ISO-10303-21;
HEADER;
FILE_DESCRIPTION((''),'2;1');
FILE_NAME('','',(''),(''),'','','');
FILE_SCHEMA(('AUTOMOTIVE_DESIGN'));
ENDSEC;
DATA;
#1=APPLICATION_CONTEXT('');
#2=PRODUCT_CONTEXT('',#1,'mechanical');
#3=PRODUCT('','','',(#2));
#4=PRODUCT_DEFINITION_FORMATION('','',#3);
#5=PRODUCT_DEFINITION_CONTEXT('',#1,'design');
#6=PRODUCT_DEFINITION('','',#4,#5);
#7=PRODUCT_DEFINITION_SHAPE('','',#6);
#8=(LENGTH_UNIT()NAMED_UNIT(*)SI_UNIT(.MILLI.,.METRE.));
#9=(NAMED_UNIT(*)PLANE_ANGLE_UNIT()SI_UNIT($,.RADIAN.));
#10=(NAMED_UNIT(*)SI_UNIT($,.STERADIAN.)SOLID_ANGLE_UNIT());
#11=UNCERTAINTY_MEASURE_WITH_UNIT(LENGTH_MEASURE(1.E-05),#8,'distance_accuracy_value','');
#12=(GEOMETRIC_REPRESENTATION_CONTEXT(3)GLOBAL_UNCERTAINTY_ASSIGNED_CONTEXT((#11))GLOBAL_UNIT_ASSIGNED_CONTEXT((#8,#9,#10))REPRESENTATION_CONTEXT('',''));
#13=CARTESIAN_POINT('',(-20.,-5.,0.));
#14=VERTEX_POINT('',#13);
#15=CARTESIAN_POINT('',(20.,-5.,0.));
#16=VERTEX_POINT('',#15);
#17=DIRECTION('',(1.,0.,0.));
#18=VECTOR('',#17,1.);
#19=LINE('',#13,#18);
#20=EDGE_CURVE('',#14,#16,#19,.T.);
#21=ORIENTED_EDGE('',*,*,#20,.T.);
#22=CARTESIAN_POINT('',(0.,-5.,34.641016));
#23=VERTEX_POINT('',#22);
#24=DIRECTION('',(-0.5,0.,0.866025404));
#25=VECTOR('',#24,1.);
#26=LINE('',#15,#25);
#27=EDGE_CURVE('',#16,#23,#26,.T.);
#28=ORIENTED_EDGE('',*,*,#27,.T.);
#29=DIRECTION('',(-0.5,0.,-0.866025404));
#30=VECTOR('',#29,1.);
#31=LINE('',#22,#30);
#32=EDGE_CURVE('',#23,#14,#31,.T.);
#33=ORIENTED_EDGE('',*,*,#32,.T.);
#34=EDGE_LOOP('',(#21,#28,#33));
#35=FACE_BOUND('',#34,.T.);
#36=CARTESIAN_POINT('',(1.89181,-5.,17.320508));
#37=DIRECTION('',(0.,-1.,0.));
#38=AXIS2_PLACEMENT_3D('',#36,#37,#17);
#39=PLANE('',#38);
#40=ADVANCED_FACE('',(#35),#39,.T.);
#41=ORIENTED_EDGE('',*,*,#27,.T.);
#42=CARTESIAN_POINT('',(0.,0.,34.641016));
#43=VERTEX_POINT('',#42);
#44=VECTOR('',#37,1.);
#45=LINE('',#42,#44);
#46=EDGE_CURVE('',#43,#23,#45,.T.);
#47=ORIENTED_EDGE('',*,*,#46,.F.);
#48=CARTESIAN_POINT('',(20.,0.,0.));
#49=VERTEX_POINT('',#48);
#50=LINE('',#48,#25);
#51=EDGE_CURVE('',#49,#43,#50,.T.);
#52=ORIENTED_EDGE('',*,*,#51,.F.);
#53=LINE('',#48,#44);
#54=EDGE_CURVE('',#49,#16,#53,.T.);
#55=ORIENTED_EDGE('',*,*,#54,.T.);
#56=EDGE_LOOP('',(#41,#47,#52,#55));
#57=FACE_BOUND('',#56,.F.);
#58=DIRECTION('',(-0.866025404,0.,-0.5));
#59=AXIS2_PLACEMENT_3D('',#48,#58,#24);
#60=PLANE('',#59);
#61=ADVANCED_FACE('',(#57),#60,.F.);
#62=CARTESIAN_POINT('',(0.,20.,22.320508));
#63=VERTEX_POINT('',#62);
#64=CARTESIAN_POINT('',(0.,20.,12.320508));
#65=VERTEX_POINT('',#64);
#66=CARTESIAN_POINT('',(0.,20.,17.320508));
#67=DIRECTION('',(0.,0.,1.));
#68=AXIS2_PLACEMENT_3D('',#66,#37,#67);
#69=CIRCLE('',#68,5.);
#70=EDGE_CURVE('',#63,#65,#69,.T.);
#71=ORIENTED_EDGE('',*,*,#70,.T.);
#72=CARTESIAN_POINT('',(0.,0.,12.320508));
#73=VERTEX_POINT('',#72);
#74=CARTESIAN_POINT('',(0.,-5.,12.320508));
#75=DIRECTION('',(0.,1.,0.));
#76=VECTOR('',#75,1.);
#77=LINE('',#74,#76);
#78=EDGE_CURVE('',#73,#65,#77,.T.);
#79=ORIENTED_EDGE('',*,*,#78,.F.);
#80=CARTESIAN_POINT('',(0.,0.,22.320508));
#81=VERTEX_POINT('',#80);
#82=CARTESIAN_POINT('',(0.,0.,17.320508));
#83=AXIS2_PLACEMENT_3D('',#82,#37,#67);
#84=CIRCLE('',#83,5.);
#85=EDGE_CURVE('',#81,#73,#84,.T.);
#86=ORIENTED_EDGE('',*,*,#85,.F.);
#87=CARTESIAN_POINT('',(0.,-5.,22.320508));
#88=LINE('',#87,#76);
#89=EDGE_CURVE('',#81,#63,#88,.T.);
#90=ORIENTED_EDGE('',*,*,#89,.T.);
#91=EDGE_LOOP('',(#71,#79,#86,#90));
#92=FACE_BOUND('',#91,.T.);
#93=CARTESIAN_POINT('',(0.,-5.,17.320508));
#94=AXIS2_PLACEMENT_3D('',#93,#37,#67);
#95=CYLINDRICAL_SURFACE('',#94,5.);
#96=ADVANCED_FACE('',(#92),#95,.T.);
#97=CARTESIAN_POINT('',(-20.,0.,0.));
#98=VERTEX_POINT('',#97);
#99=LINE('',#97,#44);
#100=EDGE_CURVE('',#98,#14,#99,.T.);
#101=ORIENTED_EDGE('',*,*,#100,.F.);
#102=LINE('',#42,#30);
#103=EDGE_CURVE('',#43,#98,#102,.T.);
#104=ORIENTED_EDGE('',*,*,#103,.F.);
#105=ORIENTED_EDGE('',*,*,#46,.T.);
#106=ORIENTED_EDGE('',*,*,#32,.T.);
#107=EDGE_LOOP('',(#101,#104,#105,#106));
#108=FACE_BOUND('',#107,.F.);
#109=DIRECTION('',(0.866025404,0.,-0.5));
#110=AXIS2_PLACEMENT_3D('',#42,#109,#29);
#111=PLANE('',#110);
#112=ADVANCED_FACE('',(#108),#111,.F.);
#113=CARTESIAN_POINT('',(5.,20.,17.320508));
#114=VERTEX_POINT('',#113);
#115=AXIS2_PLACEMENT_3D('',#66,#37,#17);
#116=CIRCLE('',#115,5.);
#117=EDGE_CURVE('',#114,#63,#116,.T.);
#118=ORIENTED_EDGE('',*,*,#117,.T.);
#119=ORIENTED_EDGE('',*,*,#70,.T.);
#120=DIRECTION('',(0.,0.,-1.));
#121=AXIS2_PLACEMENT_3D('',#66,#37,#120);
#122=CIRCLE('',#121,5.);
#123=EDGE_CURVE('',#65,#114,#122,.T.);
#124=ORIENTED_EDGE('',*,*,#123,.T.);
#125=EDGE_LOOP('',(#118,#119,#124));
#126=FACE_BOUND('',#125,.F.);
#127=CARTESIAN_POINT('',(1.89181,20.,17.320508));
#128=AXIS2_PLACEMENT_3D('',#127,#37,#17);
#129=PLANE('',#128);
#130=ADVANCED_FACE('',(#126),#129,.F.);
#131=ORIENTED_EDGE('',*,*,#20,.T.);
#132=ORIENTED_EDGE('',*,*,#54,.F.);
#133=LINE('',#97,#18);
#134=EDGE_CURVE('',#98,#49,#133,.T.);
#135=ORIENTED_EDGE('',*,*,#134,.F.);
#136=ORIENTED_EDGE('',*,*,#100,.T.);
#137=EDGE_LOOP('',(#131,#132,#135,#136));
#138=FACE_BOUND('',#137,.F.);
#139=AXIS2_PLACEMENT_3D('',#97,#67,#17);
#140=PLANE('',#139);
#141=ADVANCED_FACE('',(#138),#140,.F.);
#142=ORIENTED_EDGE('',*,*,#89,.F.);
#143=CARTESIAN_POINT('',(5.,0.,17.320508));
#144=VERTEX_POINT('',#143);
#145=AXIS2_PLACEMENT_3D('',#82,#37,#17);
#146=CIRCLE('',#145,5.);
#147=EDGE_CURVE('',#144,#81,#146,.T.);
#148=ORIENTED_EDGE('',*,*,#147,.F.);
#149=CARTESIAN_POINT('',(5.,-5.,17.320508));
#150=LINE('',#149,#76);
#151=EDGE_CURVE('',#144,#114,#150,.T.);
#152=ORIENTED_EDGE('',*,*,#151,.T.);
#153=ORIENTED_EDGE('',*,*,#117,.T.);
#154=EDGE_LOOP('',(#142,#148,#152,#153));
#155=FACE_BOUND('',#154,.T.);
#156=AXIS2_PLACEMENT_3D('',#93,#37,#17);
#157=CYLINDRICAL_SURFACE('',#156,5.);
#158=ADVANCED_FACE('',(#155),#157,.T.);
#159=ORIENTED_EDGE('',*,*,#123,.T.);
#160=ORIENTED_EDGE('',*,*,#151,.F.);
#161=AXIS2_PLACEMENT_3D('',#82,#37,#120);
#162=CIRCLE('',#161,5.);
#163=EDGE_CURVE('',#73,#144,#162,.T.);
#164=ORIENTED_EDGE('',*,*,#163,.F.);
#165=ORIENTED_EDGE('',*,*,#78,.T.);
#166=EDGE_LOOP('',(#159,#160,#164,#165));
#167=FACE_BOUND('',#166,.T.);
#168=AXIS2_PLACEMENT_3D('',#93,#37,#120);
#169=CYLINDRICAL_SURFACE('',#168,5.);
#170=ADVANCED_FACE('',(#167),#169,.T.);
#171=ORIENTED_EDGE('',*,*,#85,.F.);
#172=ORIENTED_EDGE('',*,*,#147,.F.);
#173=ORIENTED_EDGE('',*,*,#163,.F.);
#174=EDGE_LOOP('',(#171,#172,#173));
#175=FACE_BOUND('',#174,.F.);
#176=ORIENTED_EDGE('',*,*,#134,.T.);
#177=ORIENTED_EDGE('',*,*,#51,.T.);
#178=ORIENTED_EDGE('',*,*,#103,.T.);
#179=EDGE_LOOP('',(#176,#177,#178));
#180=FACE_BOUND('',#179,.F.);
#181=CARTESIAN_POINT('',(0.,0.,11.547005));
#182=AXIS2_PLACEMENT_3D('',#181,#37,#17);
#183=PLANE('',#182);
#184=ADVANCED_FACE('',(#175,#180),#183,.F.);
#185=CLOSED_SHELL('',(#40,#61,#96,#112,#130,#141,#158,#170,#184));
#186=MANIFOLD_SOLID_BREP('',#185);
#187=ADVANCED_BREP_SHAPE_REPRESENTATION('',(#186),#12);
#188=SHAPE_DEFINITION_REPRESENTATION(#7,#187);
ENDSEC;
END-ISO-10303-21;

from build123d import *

# Parameters (mm, degrees)
F1_DEPTH = 5
F3_DEPTH = 25


with BuildPart() as f1:
    # F0 (on Front) → F1 (new body)
    with BuildSketch(Plane.XZ):
        Polygon((-20, 0), (0, 0), (20, 0), (0, 34.6410161514), align=None)
    extrude(amount=F1_DEPTH)

    # F2 (on face) → F3 (join)
    with BuildSketch(Plane.XZ.offset(5)):
        with BuildLine():
            Line((0, 22.3205080757), (0, 12.3205080757))
            ThreePointArc((0, 12.3205080757), (3.5355339059, 13.7849741698), (5, 17.3205080757))
            ThreePointArc((5, 17.3205080757), (3.5355339059, 20.8560419816), (0, 22.3205080757))
        make_face()
        with BuildLine():
            ThreePointArc((0, 22.3205080757), (-5, 17.3205080757), (0, 12.3205080757))
            Line((0, 12.3205080757), (0, 22.3205080757))
        make_face()
    extrude(amount=-F3_DEPTH)


solid = f1.part
